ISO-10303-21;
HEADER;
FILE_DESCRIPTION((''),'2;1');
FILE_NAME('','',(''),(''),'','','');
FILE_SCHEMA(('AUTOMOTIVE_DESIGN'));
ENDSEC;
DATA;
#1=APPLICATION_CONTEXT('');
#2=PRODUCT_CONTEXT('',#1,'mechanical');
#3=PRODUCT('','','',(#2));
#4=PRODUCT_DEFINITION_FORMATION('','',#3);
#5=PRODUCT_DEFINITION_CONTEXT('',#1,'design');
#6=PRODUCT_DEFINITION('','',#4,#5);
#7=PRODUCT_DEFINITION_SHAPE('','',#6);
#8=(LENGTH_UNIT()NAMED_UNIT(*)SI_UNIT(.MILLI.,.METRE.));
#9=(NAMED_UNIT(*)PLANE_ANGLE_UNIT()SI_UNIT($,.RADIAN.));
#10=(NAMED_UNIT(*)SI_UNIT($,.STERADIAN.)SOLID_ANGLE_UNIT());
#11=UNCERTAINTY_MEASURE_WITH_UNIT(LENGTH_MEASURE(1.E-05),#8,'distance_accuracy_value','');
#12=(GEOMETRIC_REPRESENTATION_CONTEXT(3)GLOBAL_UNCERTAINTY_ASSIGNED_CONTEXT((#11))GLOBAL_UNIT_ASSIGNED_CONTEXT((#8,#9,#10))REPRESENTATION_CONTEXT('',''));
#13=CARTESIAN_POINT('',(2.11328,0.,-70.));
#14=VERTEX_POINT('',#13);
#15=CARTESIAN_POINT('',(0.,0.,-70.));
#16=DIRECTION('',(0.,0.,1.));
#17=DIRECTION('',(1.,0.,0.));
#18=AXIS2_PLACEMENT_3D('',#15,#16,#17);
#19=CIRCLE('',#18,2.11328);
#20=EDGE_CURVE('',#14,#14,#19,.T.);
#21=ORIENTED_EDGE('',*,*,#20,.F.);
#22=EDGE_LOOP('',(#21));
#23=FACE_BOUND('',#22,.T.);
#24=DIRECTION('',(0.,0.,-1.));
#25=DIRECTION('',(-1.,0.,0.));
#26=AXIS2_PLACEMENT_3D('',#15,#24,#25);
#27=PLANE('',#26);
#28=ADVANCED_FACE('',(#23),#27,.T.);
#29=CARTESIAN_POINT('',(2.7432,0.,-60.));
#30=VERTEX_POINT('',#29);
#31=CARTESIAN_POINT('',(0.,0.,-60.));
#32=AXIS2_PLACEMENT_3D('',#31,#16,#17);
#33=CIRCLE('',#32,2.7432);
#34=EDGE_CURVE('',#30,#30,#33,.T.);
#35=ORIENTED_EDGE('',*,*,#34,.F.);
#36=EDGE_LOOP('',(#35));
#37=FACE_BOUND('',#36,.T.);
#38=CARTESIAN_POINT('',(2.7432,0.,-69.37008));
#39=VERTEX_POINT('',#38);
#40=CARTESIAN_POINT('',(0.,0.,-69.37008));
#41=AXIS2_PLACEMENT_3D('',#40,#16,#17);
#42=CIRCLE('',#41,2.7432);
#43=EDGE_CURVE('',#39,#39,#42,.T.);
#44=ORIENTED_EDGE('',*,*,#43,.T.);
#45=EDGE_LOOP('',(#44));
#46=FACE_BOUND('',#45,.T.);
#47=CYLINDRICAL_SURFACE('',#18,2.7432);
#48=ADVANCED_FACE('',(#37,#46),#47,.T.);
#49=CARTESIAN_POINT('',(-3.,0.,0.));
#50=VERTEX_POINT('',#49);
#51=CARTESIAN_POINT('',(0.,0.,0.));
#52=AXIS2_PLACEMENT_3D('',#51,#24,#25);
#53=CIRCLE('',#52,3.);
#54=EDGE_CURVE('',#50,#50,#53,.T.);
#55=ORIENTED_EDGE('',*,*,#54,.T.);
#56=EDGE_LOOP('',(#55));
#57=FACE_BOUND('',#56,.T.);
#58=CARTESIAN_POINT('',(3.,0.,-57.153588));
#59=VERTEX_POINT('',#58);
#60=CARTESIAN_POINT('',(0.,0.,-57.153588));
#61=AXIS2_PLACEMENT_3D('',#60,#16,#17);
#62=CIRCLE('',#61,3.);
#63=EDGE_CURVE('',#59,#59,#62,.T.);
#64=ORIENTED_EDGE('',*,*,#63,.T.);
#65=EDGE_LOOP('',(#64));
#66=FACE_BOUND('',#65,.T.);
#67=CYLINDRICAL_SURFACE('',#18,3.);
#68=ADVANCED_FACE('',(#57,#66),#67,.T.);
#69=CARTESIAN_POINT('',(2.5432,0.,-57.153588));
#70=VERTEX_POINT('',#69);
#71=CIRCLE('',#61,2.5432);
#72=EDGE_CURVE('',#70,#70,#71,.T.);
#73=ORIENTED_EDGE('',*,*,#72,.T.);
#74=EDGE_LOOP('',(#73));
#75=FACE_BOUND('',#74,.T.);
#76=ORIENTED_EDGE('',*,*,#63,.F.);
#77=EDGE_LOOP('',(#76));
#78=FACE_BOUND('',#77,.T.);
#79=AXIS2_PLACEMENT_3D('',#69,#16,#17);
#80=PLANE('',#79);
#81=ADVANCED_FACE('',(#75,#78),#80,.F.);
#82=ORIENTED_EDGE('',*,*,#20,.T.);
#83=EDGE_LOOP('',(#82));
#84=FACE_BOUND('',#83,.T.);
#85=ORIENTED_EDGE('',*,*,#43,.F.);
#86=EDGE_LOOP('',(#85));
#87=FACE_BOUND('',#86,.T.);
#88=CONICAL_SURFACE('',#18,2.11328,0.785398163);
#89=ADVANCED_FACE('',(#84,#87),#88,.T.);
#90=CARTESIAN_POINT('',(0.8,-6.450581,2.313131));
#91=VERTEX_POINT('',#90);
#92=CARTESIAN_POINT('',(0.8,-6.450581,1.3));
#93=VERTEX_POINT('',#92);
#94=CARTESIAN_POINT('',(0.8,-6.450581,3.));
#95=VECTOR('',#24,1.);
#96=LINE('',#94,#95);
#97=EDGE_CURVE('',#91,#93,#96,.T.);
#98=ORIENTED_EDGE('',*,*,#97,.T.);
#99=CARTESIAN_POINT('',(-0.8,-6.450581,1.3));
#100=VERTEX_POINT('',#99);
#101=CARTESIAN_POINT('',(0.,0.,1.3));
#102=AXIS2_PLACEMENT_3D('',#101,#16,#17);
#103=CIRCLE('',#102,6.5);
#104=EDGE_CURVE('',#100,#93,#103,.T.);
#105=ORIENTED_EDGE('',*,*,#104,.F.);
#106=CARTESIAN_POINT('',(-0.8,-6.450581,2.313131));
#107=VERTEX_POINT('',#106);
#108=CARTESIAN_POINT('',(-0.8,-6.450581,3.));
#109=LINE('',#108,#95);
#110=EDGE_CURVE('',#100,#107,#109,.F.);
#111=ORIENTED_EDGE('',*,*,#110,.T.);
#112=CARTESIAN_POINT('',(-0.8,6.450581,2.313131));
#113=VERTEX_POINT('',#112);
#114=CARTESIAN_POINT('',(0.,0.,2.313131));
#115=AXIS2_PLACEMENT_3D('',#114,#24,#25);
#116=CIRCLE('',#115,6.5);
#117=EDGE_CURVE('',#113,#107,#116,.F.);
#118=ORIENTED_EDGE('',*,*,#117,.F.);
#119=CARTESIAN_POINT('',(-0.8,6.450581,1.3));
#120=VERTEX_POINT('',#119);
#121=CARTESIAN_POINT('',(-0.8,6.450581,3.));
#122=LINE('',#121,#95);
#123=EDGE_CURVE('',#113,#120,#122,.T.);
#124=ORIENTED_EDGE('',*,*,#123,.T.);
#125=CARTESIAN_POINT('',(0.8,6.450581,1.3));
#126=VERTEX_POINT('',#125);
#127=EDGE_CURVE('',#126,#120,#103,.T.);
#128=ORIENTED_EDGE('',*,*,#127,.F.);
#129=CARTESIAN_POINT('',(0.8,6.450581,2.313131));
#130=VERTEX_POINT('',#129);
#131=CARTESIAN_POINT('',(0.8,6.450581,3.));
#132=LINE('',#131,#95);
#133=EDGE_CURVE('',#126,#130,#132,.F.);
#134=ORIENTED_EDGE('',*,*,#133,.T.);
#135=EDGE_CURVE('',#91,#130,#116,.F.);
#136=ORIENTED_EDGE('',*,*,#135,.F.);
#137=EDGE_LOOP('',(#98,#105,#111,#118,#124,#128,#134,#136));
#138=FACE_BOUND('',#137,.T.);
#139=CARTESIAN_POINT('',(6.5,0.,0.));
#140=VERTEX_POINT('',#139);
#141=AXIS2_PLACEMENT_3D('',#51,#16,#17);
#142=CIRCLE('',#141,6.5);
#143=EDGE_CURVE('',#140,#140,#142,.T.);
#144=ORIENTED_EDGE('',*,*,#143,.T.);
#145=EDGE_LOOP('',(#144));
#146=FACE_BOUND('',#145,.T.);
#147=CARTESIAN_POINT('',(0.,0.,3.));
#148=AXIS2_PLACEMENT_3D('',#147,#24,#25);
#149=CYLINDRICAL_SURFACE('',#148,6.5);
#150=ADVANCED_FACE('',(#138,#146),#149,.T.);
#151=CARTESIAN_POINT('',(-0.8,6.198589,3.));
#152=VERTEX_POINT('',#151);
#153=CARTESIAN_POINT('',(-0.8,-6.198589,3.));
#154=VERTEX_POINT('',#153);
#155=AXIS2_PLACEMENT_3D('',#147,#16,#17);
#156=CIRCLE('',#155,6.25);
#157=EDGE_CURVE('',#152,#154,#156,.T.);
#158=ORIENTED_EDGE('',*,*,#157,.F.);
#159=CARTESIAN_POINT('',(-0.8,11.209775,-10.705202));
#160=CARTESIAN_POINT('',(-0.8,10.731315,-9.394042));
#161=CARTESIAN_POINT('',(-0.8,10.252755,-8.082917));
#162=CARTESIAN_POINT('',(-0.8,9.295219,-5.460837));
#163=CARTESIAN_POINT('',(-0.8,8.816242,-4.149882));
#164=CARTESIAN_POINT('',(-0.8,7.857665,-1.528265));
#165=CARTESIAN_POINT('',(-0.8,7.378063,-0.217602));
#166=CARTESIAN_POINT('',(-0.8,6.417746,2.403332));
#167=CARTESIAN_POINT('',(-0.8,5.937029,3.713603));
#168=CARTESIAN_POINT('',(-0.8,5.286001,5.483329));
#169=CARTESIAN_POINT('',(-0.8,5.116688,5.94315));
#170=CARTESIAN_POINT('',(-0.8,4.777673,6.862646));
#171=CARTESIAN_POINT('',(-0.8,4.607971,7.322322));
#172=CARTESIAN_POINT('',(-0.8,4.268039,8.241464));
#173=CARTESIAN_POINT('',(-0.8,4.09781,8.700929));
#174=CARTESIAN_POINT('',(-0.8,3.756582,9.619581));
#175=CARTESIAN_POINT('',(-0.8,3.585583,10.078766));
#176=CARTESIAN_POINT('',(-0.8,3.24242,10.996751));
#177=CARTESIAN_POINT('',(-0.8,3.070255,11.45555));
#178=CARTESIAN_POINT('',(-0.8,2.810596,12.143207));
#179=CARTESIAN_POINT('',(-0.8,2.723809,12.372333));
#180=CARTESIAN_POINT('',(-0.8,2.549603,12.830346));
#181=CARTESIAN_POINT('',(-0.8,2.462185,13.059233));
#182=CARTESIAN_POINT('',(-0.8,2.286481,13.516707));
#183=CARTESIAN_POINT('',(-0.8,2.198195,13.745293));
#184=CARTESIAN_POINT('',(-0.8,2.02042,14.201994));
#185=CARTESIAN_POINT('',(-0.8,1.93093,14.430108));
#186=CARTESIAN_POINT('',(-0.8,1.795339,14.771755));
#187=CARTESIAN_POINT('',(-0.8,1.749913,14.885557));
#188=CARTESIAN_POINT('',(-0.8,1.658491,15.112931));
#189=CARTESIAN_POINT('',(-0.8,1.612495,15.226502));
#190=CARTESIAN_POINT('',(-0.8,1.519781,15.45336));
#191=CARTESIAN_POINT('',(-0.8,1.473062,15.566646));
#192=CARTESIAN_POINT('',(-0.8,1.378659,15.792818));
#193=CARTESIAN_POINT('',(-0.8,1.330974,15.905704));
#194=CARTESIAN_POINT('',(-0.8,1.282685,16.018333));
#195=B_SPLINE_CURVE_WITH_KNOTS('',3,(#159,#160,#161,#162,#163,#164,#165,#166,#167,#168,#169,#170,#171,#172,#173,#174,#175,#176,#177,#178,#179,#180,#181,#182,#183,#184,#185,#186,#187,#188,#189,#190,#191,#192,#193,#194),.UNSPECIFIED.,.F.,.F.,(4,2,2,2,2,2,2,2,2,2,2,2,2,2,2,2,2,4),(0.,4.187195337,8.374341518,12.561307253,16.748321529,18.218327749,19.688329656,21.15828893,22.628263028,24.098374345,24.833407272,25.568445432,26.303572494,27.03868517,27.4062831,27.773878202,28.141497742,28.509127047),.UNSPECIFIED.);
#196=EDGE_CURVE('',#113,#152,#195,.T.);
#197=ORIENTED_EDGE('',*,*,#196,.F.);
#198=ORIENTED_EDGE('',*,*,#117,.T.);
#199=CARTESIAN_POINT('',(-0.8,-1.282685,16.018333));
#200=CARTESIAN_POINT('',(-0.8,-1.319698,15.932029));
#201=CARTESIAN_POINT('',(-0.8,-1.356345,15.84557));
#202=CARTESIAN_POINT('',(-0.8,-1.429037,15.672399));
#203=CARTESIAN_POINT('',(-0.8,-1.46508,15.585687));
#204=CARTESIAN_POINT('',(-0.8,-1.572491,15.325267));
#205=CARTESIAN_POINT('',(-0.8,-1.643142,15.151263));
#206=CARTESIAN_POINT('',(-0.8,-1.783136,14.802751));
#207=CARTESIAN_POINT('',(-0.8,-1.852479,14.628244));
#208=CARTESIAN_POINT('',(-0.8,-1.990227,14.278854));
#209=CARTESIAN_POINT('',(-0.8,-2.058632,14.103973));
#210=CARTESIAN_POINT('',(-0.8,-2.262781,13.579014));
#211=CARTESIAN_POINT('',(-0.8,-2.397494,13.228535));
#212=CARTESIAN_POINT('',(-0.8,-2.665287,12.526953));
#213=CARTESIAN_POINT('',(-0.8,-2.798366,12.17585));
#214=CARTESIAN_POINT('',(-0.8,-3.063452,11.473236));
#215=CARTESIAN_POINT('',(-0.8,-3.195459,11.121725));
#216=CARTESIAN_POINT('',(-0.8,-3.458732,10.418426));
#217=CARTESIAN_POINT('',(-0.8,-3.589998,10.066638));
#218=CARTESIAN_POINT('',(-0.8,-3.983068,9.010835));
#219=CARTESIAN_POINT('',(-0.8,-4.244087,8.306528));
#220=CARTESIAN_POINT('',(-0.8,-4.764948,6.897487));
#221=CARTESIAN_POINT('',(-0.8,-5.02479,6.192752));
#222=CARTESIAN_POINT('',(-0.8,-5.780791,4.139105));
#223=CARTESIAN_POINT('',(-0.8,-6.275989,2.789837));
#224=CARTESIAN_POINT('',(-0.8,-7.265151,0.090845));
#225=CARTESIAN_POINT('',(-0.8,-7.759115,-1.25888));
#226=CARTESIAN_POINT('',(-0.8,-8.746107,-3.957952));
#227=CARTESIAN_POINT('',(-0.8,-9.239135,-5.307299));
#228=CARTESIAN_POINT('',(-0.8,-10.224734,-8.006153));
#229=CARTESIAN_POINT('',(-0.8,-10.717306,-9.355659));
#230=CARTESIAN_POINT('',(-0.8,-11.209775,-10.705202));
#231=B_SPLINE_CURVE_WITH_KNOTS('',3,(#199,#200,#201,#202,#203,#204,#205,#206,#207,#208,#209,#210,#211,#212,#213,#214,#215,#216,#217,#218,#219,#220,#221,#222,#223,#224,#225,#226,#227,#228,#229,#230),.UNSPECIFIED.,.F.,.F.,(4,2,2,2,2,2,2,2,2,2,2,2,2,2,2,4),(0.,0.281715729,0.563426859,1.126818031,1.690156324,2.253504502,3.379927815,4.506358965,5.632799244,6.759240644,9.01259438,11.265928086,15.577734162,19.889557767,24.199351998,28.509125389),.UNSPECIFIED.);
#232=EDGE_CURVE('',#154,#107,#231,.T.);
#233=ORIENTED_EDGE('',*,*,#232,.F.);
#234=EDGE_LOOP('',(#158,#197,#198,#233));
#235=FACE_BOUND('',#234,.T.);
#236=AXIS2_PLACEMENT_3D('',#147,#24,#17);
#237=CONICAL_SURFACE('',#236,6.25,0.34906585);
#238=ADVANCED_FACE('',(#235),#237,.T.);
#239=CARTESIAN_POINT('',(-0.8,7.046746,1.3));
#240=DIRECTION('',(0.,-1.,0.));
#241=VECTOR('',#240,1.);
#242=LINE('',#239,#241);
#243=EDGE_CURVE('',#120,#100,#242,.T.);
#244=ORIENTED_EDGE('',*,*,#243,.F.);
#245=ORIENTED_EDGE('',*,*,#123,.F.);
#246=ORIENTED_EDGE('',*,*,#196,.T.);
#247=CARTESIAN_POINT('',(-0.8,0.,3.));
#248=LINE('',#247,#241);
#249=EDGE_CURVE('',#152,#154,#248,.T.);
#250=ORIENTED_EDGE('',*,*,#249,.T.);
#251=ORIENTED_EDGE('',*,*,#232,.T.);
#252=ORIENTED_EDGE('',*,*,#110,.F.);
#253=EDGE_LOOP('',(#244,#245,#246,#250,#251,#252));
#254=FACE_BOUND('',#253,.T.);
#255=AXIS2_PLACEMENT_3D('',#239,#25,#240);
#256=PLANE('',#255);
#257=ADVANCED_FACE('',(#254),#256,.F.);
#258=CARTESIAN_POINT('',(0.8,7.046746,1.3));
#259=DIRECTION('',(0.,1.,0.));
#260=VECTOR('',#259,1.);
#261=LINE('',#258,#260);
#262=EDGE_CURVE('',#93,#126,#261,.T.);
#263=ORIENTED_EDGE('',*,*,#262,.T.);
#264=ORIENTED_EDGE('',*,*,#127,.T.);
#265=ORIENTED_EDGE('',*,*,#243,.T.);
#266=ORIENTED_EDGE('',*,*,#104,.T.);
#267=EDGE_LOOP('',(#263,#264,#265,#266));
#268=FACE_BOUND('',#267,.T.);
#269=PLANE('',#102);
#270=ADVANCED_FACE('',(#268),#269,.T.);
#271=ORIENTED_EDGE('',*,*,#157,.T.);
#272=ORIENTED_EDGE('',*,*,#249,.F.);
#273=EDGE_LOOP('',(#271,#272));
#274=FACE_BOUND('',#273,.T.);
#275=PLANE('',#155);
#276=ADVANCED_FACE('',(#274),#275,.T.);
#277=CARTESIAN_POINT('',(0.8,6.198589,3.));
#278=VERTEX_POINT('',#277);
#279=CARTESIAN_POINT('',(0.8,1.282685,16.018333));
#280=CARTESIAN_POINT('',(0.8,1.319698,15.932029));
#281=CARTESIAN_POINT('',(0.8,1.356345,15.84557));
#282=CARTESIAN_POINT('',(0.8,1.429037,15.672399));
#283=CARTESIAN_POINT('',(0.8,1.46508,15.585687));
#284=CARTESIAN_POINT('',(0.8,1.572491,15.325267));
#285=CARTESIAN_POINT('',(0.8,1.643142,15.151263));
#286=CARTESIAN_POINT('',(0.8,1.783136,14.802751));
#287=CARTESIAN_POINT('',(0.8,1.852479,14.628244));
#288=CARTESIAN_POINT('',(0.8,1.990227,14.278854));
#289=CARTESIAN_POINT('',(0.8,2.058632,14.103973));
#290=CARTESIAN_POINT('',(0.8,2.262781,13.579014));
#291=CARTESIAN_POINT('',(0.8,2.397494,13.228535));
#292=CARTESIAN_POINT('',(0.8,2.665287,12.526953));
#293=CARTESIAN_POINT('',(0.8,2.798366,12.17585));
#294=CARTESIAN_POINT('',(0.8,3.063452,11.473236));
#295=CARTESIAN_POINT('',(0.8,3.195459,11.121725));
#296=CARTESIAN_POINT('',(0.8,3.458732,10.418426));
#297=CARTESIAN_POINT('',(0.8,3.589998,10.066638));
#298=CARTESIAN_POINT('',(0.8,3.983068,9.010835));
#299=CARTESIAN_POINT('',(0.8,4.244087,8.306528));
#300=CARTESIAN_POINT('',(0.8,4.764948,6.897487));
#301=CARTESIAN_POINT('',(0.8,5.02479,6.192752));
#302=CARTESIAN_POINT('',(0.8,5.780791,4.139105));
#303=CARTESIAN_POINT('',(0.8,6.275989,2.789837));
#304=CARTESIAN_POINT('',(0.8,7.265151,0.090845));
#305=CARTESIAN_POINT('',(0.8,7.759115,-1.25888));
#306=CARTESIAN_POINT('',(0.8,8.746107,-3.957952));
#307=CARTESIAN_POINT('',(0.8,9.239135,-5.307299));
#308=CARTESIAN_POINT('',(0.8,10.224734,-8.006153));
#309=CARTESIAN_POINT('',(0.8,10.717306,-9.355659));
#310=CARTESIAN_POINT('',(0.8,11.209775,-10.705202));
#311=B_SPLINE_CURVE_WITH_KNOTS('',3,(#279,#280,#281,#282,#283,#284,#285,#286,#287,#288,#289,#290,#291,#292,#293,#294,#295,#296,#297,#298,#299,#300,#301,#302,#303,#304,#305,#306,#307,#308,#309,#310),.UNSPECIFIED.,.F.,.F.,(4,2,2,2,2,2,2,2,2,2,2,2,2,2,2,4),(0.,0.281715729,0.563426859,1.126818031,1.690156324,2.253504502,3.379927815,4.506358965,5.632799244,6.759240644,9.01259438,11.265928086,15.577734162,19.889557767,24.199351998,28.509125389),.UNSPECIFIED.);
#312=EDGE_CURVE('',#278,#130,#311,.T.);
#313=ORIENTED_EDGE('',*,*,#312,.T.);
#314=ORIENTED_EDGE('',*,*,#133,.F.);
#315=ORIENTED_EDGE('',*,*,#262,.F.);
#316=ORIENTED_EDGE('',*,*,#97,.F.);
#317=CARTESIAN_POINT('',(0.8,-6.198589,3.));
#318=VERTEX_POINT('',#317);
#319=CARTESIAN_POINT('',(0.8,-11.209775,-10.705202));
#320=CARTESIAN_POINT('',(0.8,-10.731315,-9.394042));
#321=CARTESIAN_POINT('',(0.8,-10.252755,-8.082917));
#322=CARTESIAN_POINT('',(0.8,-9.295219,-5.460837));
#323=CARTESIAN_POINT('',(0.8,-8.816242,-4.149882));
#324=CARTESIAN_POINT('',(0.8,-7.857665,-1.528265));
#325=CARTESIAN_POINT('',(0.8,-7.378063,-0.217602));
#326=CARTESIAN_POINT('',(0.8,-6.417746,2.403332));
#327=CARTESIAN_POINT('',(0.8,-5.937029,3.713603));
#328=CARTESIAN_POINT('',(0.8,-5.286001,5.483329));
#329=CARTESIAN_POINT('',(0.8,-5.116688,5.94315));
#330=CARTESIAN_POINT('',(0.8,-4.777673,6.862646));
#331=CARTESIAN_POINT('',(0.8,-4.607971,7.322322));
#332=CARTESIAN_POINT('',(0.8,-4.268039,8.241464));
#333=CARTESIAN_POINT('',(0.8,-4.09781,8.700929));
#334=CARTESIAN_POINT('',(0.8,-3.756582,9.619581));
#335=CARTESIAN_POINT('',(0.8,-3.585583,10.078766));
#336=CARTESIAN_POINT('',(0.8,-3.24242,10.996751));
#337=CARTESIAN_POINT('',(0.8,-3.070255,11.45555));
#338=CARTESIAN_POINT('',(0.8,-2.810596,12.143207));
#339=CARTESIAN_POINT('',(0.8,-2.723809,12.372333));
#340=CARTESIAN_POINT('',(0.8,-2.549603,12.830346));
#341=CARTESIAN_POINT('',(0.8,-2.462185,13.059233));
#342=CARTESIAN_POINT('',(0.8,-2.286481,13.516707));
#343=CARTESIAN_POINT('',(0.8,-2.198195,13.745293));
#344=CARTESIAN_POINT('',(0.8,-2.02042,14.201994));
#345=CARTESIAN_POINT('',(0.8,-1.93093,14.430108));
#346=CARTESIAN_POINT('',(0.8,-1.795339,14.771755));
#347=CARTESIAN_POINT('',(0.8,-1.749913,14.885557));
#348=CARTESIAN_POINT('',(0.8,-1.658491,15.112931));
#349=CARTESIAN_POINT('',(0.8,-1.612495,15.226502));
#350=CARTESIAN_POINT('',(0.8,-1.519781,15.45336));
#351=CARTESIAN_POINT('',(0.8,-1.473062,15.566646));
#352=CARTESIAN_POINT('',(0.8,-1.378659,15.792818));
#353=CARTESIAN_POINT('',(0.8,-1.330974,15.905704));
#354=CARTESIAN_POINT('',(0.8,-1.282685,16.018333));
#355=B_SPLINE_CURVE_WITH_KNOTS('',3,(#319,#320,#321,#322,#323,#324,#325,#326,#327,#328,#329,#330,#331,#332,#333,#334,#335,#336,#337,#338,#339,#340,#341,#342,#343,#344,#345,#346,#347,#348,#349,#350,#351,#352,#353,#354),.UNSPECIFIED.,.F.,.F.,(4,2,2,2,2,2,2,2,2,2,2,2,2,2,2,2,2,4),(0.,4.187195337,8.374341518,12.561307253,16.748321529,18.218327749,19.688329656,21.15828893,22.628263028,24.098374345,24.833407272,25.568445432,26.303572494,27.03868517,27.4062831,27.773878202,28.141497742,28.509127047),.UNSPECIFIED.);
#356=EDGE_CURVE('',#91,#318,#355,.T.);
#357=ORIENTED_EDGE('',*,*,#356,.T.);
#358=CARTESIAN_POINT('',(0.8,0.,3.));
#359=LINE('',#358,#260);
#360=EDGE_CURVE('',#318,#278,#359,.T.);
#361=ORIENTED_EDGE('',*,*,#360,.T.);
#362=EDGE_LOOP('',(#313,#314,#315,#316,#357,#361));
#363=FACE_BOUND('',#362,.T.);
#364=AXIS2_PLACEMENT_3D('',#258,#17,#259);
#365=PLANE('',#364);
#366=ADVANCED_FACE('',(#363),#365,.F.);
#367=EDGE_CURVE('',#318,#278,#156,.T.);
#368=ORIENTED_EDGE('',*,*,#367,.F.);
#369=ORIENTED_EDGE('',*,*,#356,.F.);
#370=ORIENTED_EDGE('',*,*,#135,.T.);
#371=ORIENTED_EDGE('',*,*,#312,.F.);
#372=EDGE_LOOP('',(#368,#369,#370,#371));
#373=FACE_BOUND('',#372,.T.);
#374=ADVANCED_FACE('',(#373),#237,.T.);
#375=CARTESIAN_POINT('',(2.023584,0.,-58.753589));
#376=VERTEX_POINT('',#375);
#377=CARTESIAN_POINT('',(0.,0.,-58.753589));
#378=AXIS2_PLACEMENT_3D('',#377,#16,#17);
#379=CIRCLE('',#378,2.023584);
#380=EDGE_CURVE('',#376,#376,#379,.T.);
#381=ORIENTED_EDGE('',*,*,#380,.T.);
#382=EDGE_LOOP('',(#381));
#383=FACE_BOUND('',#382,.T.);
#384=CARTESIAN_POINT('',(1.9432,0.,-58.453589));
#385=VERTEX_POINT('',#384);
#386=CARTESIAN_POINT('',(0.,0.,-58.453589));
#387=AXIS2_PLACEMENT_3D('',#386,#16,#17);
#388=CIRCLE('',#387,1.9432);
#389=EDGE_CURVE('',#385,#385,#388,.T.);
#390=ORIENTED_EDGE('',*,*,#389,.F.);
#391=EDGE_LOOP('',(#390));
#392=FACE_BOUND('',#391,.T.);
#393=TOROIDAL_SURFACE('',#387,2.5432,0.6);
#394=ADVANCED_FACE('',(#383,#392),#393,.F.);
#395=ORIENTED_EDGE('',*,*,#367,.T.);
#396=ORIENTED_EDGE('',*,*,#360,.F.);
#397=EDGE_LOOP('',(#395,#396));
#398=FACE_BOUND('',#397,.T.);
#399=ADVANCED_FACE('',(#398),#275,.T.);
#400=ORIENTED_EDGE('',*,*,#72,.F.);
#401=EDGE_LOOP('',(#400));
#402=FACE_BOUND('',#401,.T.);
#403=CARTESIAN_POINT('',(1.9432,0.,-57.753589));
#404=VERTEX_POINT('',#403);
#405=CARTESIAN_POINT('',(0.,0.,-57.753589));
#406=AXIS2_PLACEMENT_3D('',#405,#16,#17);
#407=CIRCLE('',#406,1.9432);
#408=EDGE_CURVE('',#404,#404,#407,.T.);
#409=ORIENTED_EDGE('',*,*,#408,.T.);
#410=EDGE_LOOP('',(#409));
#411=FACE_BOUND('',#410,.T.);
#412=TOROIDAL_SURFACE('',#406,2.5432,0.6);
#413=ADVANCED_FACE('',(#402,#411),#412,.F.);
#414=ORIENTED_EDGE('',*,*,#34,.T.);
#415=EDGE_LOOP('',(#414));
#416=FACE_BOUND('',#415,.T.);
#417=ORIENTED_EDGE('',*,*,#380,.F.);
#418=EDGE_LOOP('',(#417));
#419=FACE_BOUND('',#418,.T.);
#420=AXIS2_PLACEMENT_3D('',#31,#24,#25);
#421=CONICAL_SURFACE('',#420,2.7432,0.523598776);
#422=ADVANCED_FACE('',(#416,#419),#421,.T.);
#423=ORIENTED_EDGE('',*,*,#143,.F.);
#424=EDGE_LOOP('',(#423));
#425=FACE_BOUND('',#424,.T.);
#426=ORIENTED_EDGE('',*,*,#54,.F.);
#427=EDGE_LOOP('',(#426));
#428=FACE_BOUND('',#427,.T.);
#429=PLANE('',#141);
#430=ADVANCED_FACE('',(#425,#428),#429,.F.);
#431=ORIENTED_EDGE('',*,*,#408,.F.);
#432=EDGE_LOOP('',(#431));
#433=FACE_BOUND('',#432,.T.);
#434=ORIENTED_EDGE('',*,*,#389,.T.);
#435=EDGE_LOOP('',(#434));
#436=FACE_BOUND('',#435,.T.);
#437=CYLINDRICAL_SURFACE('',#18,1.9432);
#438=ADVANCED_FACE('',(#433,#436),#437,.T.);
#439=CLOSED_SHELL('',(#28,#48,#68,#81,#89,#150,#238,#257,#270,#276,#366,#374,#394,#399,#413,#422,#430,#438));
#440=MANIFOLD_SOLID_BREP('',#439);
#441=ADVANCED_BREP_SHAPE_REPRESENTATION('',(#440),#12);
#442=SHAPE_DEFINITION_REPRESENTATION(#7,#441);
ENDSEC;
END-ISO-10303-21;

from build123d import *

# Parameters (mm, degrees)
CROQUIS2_R              = 6.5
SALIENTE_EXTRUIR1_DEPTH = 3
CROQUIS3_R              = 3
SALIENTE_EXTRUIR2_DEPTH = 70
CROQUIS4_OUTSIDE_W      = 32.968
CROQUIS4_OUTSIDE_H      = 32.968
CROQUIS4_OUTSIDE_R      = 6.25
CORTAR_EXTRUIR1_DEPTH   = 4
CORTAR_EXTRUIR1_DRAFT   = -20
CROQUIS6_W              = 1.6
CROQUIS6_H              = 14.093492938
CORTAR_EXTRUIR2_DEPTH   = 1.7


# Read off the part's stored shape, not the designer's step: #12-24 Machine Threads Stud1
with BuildPart() as part:
    # Croquis2 → Saliente-Extruir1 (new body)
    with BuildSketch(Plane.XY):
        Circle(CROQUIS2_R)
    extrude(amount=SALIENTE_EXTRUIR1_DEPTH)

    # Croquis3 → Saliente-Extruir2 (add)
    with BuildSketch(Plane(origin=(0, 0, 0), x_dir=(-1, 0, 0), z_dir=(0, 0, -1))):
        Circle(CROQUIS3_R)
    extrude(amount=SALIENTE_EXTRUIR2_DEPTH)


with BuildPart() as cortar_extruir1_tool:
    # Croquis4 outside → Cortar-Extruir1 (with draft: the straight prism first)
    with BuildSketch(Plane.XY.offset(3)):
        Rectangle(CROQUIS4_OUTSIDE_W, CROQUIS4_OUTSIDE_H)
        Circle(CROQUIS4_OUTSIDE_R, mode=Mode.SUBTRACT)
    extrude(amount=-CORTAR_EXTRUIR1_DEPTH)
    # Cortar-Extruir1: the draft: its side faces are tilted about the plane it starts from
    cortar_extruir1_sides = [cortar_extruir1_tool.faces().sort_by_distance(p)[0] for p in [
        (0, -16.484, 1),
        (16.484, 0, 1),
        (0, 16.484, 1),
        (-16.484, 0, 1),
        (-6.25, 0, 1),
    ]]
    draft(cortar_extruir1_sides, Plane.XY.offset(3), CORTAR_EXTRUIR1_DRAFT)


with BuildPart() as part_1:
    add(part.part)

    # Cortar-Extruir1: cut by cortar_extruir1_tool
    add(cortar_extruir1_tool.part, mode=Mode.SUBTRACT)

    # Croquis6 → Cortar-Extruir2 (cut)
    with BuildSketch(Plane.XY.offset(3)):
        Rectangle(CROQUIS6_W, CROQUIS6_H)
    extrude(amount=-CORTAR_EXTRUIR2_DEPTH, mode=Mode.SUBTRACT)

    # #12-24 Machine Threads Stud1 outline → #12-24 Machine Threads Stud1 (revolve, cut)
    with BuildSketch(Plane.XZ):
        with BuildLine():
            Line((2.11328, -70), (3, -70))
            Line((3, -70), (3, -57.153588301))
            Line((3, -57.153588301), (2.543199892, -57.153588301))
            ThreePointArc((2.543199892, -57.153588301), (2.118935595, -57.329324327), (1.943199568, -57.753588625))
            Line((1.943199568, -57.753588625), (1.943199568, -58.453589003))
            ThreePointArc((1.943199568, -58.453589003), (1.963644083, -58.608880514), (2.023584369, -58.753589165))
            Line((2.023584369, -58.753589165), (2.7432, -60))
            Line((2.7432, -60), (2.7432, -69.37008))
            Line((2.7432, -69.37008), (2.11328, -70))
        make_face()
    revolve(axis=Axis((0, 0, 0), (0, 0, 1)), mode=Mode.SUBTRACT)


solid = part_1.part
